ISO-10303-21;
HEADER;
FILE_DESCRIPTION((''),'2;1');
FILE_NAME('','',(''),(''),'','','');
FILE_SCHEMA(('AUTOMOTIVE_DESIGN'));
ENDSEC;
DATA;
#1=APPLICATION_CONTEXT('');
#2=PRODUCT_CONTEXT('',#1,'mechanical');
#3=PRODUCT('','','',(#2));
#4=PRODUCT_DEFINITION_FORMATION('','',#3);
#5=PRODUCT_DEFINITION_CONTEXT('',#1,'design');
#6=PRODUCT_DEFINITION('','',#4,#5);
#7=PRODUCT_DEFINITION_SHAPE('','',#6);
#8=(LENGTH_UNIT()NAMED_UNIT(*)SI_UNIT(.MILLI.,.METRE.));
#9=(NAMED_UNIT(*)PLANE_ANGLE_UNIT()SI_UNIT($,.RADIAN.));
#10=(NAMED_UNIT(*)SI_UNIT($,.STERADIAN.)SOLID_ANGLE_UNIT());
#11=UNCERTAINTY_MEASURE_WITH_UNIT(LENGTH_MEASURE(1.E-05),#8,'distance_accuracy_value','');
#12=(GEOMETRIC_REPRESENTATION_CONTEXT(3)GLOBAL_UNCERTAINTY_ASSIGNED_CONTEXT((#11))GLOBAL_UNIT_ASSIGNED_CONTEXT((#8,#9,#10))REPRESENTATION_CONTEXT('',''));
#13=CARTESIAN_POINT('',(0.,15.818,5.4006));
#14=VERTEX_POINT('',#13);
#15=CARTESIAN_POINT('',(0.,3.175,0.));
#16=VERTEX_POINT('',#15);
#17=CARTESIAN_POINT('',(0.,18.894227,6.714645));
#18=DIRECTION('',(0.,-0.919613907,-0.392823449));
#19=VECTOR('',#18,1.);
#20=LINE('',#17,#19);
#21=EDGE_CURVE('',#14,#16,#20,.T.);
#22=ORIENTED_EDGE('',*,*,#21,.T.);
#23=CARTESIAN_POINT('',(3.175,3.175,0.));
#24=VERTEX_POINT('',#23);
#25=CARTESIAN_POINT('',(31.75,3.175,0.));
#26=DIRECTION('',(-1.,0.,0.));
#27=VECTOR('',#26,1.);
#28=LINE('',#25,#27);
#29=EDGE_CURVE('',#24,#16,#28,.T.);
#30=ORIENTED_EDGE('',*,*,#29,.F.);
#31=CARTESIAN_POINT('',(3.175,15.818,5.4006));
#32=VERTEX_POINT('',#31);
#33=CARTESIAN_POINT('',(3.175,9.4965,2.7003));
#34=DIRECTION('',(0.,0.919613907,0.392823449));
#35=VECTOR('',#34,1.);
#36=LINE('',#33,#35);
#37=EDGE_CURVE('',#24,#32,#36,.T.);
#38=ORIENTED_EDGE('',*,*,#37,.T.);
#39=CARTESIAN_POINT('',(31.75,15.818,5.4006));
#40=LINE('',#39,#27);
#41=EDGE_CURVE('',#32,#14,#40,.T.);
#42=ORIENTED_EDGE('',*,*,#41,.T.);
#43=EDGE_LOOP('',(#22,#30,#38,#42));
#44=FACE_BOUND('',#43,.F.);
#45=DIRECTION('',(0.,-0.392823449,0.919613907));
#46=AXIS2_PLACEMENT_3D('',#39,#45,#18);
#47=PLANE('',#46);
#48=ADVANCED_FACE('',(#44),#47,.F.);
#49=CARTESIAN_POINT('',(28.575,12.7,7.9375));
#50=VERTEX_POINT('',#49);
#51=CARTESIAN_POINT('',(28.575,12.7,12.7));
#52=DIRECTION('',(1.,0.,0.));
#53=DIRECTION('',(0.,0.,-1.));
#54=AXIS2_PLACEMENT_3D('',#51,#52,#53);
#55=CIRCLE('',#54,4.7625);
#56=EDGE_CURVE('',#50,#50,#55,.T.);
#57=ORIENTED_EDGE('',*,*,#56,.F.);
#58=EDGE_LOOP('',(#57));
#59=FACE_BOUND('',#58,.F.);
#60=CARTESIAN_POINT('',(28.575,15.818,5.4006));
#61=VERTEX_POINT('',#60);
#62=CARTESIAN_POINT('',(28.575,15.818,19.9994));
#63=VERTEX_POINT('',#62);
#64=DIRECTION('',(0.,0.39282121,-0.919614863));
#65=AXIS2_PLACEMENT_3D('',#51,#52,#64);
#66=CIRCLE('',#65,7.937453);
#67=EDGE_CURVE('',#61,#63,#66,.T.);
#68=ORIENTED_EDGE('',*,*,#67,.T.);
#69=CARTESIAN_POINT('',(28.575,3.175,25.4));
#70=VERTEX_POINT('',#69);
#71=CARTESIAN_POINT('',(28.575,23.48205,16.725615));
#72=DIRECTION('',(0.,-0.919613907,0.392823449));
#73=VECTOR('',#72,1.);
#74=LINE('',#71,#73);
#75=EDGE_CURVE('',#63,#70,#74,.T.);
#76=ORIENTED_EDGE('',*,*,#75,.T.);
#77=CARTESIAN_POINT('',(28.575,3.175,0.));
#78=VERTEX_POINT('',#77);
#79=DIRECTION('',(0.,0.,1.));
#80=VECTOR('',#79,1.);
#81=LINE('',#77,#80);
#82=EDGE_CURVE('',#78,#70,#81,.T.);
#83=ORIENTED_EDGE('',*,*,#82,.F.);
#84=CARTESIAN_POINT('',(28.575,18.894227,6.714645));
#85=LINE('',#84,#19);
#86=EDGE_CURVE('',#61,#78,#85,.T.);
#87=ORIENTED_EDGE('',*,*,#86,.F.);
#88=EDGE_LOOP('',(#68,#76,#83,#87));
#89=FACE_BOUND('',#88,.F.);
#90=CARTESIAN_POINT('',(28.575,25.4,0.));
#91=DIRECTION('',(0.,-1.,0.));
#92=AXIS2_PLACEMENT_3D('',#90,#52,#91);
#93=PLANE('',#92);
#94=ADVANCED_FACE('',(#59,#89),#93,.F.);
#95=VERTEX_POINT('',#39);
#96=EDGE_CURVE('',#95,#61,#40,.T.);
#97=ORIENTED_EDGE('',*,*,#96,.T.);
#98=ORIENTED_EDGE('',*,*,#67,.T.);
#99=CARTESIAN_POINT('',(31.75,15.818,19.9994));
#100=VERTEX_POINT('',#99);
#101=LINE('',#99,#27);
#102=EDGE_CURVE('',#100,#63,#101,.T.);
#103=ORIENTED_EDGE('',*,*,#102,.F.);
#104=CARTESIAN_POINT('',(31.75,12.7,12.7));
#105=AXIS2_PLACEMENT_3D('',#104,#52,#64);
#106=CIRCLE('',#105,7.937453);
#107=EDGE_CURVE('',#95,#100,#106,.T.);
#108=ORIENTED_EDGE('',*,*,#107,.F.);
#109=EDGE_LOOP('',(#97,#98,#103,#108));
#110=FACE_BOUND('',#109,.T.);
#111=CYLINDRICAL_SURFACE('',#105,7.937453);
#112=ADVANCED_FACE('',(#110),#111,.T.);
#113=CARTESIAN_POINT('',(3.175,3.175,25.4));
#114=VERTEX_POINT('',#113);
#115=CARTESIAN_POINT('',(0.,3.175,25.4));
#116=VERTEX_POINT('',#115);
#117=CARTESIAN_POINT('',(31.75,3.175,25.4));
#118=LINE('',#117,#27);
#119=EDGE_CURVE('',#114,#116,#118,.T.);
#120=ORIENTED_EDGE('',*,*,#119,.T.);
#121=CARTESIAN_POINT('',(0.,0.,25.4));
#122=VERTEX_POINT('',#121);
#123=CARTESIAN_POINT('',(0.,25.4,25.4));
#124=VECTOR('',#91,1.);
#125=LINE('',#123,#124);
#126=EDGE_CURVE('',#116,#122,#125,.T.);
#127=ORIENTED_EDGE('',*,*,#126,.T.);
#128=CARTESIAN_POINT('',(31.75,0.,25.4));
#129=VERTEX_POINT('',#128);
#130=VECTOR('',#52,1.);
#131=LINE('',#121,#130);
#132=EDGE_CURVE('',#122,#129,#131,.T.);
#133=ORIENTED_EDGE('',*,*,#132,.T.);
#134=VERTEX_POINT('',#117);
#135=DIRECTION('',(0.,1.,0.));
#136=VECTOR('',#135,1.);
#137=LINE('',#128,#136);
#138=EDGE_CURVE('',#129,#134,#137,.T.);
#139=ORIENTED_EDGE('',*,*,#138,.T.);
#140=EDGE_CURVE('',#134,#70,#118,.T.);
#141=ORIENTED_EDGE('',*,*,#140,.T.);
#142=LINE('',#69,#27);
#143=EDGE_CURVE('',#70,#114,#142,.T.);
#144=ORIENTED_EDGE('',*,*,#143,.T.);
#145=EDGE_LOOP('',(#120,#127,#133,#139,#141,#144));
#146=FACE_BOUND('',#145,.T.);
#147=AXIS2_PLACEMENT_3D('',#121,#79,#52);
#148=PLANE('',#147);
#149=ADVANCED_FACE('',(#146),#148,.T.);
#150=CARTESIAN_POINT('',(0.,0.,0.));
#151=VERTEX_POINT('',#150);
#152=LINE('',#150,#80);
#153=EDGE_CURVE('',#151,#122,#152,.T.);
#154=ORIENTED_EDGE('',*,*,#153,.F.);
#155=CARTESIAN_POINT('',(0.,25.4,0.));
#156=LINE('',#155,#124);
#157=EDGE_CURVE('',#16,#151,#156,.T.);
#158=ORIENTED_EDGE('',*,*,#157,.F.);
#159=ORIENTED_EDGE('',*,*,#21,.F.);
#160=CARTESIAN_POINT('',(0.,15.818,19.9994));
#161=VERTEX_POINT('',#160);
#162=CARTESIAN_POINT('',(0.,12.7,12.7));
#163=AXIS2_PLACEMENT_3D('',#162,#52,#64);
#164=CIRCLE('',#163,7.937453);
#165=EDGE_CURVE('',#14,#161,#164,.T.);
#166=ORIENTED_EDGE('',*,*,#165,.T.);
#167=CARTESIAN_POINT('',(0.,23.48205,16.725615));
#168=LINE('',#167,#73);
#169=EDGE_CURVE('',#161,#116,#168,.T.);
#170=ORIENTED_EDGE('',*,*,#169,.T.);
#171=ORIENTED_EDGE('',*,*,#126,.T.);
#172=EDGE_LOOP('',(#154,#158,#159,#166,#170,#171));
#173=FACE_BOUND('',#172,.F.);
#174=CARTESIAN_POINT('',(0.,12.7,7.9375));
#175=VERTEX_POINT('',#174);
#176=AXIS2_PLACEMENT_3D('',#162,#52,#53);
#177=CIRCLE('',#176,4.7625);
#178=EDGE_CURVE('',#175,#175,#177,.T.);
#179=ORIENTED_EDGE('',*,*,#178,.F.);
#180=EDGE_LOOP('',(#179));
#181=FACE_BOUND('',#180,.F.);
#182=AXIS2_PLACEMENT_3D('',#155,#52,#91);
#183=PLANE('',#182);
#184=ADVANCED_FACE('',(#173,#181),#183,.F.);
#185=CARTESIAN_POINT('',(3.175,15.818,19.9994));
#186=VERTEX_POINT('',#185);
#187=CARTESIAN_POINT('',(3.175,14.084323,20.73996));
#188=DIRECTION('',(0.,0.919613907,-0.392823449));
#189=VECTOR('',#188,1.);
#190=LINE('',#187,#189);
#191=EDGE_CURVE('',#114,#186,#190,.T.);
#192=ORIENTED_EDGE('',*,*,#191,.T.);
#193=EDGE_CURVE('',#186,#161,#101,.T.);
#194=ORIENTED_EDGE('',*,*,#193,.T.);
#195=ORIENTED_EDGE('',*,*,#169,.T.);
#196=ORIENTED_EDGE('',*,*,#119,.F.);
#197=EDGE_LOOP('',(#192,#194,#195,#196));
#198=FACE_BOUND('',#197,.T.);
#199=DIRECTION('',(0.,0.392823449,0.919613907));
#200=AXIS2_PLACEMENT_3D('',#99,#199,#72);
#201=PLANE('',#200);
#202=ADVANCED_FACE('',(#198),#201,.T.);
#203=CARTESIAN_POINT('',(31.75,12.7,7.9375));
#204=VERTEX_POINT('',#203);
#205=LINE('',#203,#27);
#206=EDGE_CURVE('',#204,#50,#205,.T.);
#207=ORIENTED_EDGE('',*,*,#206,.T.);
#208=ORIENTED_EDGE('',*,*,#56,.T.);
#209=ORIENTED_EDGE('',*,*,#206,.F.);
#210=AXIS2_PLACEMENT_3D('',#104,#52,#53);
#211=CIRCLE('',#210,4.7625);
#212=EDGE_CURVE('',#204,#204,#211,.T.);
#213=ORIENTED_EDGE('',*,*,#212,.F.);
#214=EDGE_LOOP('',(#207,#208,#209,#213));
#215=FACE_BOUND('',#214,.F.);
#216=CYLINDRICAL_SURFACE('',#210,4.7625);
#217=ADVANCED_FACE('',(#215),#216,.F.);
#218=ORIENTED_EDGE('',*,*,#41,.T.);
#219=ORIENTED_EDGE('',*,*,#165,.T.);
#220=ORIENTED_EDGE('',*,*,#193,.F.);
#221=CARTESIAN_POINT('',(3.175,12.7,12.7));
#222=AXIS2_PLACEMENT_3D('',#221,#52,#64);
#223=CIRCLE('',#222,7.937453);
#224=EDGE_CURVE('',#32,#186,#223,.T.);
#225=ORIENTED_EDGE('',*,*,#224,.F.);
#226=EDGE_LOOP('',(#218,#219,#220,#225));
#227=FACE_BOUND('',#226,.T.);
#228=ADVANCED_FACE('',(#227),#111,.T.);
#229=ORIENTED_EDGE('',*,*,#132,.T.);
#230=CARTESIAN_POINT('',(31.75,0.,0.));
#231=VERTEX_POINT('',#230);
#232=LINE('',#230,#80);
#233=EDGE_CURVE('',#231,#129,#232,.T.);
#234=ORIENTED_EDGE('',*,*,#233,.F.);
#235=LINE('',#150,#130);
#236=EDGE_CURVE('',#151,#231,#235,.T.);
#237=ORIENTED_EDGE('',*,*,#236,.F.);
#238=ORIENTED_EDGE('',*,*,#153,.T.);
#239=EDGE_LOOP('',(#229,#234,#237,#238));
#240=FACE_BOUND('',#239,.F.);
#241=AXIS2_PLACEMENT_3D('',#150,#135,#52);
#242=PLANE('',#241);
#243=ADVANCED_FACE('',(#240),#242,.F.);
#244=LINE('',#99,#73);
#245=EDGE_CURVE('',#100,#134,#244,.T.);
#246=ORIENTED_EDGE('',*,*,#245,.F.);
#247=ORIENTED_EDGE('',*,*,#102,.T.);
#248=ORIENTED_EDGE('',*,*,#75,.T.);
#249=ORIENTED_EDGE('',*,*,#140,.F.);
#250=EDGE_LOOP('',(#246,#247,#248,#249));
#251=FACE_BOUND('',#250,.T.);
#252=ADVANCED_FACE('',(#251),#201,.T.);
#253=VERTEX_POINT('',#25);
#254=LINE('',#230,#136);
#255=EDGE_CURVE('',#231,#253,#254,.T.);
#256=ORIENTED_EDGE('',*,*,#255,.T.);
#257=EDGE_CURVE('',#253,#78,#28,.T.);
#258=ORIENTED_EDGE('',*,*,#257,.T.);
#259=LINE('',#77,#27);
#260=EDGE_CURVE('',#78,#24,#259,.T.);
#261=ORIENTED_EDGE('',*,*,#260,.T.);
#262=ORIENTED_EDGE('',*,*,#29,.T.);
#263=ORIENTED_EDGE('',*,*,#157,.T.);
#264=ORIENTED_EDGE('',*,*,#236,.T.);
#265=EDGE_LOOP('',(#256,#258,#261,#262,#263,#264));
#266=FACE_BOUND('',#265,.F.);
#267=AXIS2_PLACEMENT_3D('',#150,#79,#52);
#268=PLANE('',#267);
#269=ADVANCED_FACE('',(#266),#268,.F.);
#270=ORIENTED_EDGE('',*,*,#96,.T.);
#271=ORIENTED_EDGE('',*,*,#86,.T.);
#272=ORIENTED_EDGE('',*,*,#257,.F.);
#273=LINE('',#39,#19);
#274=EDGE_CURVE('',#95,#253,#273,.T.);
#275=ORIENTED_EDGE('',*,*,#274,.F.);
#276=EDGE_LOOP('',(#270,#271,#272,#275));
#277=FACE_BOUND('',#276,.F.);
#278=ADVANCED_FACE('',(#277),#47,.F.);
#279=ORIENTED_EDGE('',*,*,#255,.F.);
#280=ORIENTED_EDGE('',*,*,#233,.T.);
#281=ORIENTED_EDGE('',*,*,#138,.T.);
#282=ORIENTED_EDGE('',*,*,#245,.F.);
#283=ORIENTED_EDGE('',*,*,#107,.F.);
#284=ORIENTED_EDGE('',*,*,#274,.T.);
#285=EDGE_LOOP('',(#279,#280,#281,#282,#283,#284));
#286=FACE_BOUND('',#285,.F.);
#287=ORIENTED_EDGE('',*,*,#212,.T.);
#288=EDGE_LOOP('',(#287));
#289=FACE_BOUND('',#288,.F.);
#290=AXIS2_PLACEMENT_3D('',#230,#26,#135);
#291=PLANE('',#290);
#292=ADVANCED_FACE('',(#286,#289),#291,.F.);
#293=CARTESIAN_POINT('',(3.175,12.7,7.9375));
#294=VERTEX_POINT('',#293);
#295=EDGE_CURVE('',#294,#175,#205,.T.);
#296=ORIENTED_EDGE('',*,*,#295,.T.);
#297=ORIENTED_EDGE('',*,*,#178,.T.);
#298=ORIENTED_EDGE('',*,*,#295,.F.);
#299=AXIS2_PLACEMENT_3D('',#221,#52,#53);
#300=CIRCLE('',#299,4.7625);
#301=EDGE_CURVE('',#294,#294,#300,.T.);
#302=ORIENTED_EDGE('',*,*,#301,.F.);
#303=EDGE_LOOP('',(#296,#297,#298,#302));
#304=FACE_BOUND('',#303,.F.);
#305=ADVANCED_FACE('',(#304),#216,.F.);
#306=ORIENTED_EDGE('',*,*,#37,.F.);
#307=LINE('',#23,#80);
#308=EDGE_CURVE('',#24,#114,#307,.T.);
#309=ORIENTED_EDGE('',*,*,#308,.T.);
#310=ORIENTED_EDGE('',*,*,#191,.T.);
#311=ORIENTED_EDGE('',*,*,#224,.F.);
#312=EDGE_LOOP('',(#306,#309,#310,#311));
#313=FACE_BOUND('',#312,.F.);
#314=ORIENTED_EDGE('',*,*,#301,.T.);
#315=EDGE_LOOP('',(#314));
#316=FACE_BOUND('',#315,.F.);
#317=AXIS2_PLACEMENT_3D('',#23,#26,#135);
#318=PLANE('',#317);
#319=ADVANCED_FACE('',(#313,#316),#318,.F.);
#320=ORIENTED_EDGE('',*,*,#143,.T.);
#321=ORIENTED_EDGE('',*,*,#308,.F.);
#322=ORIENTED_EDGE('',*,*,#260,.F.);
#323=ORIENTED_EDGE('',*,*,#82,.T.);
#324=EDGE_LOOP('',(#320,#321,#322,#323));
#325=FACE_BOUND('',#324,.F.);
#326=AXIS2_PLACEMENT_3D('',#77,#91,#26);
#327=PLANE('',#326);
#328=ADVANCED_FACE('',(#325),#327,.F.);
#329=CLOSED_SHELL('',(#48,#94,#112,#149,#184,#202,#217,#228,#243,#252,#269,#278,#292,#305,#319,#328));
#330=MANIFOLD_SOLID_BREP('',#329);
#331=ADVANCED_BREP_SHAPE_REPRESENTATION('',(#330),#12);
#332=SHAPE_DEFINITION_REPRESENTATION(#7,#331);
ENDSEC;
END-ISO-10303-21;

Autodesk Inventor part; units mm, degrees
ref_plane "YZ Plane" through (0, 0, 0) normal (1, 0, 0) x (0, 1, 0)
ref_plane "XZ Plane" through (0, 0, 0) normal (0, 1, 0) x (-1, 0, 0)
ref_plane "XY Plane" through (0, 0, 0) normal (0, 0, 1) x (1, 0, 0)
sketch "Sketch1" plane through (0, 0, 0) normal (0, 0, 1) x (1, 0, 0)
  line L0 (0, 0) -> (31.75, 0)
  line L1 (31.75, 0) -> (31.75, 25.4)
  line L2 (0, 25.4) -> (0, 0)
  line L3 (28.575, 25.4) -> (28.575, 3.175)
  line L4 (28.575, 3.175) -> (3.175, 3.175)
  line L5 (3.175, 3.175) -> (3.175, 25.4)
  line L6 (31.75, 25.4) -> (28.575, 25.4)
  line L7 (3.175, 25.4) -> (0, 25.4)
  dimension "d0" = 25.4
  dimension "d1" = 31.75
  dimension "d2" = 3.175
  dimension "d3" = 3.175
  dimension "d4" = 3.175
extrude "Extrusion1" add sketch "Sketch1" along normal blind 25.4
sketch "Sketch2" plane through (31.75, 0, 0) normal (1, 0, 0) x (0, 0, -1)
  line L0 (-25.4, 25.4) -> (-25.4, 0) projected
  line L1 (0, 0) -> (-25.4, 0) projected
  line L2 (0, 0) -> (0, 25.4) projected
  line L3 (0, 25.4) -> (-25.4, 25.4) projected
  circle A0 centre (-12.7, 12.7) radius 4.7625
  arc A1 (-5.4006, 15.818) -> (-19.9994, 15.818) centre (-12.7, 12.7) ccw
  line L4 (-19.9994, 15.818) -> (-25.4, 3.175)
  line L5 (-5.4006, 15.818) -> (0, 3.175)
  point P0 (0, 12.7)
  dimension "d9" = 9.525
  dimension "d13" = 3.175
  dimension "d14" = 12.7
  dimension "d15" = 7.9375
  dimension "d16" = 12.7
extrude "Extrusion2" cut sketch "Sketch2" against normal through all contours L3 L2 L5 A1 L4 L0 | A0
equation "\"d3\" = d2"
equation "\"d4\" = d3"
properties part number "manipulator pnumaitic pivot"
